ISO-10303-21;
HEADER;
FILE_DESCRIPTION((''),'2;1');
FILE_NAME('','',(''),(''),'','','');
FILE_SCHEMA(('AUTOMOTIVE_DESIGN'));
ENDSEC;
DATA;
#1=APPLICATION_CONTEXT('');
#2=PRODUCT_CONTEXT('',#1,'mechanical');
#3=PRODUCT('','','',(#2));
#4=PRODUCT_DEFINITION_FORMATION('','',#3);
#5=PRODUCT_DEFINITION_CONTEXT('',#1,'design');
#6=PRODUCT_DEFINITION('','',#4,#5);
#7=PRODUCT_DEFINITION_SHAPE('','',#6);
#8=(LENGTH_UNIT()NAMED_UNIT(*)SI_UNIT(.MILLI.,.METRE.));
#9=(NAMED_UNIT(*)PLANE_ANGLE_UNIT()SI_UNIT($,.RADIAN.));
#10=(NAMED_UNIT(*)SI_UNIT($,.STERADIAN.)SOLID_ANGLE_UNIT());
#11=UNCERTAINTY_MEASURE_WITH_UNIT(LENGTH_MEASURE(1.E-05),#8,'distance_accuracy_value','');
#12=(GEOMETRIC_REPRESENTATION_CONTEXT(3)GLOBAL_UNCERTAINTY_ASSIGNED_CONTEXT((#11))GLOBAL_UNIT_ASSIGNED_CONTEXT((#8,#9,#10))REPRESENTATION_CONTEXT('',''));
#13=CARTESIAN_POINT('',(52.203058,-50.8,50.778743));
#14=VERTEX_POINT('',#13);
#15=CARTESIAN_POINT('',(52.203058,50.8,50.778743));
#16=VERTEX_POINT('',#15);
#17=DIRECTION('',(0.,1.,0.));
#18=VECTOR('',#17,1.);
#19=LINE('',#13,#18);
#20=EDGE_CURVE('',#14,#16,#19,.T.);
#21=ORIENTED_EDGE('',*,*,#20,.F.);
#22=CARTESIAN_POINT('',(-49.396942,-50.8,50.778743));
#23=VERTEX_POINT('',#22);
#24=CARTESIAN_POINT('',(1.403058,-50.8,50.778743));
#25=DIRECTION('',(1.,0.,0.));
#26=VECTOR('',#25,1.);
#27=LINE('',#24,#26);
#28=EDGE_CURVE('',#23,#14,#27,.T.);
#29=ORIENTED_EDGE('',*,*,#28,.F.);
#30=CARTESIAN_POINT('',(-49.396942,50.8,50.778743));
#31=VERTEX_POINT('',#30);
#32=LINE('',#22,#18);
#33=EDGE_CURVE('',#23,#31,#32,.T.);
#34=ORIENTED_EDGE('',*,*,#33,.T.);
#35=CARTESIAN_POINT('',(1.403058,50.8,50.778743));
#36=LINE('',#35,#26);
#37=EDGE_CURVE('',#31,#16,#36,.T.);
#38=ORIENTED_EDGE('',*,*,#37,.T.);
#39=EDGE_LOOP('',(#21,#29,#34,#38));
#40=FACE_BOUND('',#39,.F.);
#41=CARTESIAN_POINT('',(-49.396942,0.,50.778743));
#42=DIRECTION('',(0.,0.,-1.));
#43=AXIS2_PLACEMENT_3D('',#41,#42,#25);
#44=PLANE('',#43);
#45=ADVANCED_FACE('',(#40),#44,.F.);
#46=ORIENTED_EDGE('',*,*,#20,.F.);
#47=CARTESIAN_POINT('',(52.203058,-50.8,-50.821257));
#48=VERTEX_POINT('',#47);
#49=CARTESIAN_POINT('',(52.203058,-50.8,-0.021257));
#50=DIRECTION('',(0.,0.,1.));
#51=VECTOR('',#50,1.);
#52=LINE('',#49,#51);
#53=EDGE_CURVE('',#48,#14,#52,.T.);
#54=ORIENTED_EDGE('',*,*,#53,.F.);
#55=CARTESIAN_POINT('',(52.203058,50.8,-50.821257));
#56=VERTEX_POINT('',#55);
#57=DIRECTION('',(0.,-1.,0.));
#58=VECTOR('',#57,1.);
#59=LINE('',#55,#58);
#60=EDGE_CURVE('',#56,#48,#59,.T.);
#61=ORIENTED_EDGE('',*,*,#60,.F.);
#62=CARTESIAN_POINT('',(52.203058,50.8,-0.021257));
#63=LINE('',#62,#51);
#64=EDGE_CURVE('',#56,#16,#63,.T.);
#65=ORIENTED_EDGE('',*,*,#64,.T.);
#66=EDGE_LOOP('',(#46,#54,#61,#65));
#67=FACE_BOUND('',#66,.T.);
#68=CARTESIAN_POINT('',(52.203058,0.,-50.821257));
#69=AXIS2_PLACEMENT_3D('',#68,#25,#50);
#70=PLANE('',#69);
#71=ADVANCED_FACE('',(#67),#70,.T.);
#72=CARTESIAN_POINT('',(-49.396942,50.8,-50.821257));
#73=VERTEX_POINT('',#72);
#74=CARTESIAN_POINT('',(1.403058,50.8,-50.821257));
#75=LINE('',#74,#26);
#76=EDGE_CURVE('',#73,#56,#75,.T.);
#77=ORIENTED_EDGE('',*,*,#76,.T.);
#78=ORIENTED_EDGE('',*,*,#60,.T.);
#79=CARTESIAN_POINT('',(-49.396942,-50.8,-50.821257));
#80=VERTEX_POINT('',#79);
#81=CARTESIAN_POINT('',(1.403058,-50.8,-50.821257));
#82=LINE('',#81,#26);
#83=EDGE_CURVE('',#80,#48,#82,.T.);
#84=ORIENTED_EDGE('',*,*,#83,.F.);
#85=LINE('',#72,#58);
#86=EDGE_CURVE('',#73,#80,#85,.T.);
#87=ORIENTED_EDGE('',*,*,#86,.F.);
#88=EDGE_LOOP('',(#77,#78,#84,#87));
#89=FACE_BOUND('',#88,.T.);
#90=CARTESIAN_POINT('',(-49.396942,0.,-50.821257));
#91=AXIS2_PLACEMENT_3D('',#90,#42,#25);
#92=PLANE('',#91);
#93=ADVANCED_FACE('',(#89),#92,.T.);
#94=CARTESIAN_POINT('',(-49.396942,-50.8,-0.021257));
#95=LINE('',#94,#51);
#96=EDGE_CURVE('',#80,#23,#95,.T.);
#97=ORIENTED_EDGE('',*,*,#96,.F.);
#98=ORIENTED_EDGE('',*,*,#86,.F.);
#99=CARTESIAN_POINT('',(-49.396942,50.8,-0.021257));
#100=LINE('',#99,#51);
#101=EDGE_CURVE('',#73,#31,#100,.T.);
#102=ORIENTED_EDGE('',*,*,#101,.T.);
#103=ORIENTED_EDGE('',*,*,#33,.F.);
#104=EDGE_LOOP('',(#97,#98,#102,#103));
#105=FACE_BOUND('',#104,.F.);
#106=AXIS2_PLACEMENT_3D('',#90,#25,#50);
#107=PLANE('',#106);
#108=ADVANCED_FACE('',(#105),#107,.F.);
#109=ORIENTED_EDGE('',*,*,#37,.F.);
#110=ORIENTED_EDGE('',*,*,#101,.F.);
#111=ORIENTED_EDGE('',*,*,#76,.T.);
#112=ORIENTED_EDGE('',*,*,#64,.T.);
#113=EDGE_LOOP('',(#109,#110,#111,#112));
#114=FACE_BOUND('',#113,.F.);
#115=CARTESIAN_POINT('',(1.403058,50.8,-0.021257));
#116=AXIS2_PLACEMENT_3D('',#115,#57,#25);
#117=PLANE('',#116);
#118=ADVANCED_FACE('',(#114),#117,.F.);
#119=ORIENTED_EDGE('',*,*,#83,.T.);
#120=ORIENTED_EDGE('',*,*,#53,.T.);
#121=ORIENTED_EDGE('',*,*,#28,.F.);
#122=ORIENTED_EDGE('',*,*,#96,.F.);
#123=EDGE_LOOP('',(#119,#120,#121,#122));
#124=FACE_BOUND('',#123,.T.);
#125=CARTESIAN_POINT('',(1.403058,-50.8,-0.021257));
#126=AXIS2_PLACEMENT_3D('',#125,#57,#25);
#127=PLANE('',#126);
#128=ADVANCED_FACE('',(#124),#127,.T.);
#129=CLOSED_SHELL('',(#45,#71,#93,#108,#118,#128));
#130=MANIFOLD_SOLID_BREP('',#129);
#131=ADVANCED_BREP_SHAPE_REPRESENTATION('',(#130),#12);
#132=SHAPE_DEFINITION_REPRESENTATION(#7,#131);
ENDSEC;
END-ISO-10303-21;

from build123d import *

# Parameters (mm, degrees)
F1_W     = 101.6
F1_H     = 101.6
F2_DEPTH = 50.8


# Not quite as in the source:
# - a variable given as a bare number and used for a length is read in inches; the dataset says mm whatever the document's units were


with BuildPart() as f2:
    # F1 (on Front) → F2 (new body, symmetric)
    with BuildSketch(Plane.XZ):
        with Locations((1.4030579478, -0.0212566953)):
            Rectangle(F1_W, F1_H)
    extrude(amount=F2_DEPTH, both=True)


solid = f2.part
